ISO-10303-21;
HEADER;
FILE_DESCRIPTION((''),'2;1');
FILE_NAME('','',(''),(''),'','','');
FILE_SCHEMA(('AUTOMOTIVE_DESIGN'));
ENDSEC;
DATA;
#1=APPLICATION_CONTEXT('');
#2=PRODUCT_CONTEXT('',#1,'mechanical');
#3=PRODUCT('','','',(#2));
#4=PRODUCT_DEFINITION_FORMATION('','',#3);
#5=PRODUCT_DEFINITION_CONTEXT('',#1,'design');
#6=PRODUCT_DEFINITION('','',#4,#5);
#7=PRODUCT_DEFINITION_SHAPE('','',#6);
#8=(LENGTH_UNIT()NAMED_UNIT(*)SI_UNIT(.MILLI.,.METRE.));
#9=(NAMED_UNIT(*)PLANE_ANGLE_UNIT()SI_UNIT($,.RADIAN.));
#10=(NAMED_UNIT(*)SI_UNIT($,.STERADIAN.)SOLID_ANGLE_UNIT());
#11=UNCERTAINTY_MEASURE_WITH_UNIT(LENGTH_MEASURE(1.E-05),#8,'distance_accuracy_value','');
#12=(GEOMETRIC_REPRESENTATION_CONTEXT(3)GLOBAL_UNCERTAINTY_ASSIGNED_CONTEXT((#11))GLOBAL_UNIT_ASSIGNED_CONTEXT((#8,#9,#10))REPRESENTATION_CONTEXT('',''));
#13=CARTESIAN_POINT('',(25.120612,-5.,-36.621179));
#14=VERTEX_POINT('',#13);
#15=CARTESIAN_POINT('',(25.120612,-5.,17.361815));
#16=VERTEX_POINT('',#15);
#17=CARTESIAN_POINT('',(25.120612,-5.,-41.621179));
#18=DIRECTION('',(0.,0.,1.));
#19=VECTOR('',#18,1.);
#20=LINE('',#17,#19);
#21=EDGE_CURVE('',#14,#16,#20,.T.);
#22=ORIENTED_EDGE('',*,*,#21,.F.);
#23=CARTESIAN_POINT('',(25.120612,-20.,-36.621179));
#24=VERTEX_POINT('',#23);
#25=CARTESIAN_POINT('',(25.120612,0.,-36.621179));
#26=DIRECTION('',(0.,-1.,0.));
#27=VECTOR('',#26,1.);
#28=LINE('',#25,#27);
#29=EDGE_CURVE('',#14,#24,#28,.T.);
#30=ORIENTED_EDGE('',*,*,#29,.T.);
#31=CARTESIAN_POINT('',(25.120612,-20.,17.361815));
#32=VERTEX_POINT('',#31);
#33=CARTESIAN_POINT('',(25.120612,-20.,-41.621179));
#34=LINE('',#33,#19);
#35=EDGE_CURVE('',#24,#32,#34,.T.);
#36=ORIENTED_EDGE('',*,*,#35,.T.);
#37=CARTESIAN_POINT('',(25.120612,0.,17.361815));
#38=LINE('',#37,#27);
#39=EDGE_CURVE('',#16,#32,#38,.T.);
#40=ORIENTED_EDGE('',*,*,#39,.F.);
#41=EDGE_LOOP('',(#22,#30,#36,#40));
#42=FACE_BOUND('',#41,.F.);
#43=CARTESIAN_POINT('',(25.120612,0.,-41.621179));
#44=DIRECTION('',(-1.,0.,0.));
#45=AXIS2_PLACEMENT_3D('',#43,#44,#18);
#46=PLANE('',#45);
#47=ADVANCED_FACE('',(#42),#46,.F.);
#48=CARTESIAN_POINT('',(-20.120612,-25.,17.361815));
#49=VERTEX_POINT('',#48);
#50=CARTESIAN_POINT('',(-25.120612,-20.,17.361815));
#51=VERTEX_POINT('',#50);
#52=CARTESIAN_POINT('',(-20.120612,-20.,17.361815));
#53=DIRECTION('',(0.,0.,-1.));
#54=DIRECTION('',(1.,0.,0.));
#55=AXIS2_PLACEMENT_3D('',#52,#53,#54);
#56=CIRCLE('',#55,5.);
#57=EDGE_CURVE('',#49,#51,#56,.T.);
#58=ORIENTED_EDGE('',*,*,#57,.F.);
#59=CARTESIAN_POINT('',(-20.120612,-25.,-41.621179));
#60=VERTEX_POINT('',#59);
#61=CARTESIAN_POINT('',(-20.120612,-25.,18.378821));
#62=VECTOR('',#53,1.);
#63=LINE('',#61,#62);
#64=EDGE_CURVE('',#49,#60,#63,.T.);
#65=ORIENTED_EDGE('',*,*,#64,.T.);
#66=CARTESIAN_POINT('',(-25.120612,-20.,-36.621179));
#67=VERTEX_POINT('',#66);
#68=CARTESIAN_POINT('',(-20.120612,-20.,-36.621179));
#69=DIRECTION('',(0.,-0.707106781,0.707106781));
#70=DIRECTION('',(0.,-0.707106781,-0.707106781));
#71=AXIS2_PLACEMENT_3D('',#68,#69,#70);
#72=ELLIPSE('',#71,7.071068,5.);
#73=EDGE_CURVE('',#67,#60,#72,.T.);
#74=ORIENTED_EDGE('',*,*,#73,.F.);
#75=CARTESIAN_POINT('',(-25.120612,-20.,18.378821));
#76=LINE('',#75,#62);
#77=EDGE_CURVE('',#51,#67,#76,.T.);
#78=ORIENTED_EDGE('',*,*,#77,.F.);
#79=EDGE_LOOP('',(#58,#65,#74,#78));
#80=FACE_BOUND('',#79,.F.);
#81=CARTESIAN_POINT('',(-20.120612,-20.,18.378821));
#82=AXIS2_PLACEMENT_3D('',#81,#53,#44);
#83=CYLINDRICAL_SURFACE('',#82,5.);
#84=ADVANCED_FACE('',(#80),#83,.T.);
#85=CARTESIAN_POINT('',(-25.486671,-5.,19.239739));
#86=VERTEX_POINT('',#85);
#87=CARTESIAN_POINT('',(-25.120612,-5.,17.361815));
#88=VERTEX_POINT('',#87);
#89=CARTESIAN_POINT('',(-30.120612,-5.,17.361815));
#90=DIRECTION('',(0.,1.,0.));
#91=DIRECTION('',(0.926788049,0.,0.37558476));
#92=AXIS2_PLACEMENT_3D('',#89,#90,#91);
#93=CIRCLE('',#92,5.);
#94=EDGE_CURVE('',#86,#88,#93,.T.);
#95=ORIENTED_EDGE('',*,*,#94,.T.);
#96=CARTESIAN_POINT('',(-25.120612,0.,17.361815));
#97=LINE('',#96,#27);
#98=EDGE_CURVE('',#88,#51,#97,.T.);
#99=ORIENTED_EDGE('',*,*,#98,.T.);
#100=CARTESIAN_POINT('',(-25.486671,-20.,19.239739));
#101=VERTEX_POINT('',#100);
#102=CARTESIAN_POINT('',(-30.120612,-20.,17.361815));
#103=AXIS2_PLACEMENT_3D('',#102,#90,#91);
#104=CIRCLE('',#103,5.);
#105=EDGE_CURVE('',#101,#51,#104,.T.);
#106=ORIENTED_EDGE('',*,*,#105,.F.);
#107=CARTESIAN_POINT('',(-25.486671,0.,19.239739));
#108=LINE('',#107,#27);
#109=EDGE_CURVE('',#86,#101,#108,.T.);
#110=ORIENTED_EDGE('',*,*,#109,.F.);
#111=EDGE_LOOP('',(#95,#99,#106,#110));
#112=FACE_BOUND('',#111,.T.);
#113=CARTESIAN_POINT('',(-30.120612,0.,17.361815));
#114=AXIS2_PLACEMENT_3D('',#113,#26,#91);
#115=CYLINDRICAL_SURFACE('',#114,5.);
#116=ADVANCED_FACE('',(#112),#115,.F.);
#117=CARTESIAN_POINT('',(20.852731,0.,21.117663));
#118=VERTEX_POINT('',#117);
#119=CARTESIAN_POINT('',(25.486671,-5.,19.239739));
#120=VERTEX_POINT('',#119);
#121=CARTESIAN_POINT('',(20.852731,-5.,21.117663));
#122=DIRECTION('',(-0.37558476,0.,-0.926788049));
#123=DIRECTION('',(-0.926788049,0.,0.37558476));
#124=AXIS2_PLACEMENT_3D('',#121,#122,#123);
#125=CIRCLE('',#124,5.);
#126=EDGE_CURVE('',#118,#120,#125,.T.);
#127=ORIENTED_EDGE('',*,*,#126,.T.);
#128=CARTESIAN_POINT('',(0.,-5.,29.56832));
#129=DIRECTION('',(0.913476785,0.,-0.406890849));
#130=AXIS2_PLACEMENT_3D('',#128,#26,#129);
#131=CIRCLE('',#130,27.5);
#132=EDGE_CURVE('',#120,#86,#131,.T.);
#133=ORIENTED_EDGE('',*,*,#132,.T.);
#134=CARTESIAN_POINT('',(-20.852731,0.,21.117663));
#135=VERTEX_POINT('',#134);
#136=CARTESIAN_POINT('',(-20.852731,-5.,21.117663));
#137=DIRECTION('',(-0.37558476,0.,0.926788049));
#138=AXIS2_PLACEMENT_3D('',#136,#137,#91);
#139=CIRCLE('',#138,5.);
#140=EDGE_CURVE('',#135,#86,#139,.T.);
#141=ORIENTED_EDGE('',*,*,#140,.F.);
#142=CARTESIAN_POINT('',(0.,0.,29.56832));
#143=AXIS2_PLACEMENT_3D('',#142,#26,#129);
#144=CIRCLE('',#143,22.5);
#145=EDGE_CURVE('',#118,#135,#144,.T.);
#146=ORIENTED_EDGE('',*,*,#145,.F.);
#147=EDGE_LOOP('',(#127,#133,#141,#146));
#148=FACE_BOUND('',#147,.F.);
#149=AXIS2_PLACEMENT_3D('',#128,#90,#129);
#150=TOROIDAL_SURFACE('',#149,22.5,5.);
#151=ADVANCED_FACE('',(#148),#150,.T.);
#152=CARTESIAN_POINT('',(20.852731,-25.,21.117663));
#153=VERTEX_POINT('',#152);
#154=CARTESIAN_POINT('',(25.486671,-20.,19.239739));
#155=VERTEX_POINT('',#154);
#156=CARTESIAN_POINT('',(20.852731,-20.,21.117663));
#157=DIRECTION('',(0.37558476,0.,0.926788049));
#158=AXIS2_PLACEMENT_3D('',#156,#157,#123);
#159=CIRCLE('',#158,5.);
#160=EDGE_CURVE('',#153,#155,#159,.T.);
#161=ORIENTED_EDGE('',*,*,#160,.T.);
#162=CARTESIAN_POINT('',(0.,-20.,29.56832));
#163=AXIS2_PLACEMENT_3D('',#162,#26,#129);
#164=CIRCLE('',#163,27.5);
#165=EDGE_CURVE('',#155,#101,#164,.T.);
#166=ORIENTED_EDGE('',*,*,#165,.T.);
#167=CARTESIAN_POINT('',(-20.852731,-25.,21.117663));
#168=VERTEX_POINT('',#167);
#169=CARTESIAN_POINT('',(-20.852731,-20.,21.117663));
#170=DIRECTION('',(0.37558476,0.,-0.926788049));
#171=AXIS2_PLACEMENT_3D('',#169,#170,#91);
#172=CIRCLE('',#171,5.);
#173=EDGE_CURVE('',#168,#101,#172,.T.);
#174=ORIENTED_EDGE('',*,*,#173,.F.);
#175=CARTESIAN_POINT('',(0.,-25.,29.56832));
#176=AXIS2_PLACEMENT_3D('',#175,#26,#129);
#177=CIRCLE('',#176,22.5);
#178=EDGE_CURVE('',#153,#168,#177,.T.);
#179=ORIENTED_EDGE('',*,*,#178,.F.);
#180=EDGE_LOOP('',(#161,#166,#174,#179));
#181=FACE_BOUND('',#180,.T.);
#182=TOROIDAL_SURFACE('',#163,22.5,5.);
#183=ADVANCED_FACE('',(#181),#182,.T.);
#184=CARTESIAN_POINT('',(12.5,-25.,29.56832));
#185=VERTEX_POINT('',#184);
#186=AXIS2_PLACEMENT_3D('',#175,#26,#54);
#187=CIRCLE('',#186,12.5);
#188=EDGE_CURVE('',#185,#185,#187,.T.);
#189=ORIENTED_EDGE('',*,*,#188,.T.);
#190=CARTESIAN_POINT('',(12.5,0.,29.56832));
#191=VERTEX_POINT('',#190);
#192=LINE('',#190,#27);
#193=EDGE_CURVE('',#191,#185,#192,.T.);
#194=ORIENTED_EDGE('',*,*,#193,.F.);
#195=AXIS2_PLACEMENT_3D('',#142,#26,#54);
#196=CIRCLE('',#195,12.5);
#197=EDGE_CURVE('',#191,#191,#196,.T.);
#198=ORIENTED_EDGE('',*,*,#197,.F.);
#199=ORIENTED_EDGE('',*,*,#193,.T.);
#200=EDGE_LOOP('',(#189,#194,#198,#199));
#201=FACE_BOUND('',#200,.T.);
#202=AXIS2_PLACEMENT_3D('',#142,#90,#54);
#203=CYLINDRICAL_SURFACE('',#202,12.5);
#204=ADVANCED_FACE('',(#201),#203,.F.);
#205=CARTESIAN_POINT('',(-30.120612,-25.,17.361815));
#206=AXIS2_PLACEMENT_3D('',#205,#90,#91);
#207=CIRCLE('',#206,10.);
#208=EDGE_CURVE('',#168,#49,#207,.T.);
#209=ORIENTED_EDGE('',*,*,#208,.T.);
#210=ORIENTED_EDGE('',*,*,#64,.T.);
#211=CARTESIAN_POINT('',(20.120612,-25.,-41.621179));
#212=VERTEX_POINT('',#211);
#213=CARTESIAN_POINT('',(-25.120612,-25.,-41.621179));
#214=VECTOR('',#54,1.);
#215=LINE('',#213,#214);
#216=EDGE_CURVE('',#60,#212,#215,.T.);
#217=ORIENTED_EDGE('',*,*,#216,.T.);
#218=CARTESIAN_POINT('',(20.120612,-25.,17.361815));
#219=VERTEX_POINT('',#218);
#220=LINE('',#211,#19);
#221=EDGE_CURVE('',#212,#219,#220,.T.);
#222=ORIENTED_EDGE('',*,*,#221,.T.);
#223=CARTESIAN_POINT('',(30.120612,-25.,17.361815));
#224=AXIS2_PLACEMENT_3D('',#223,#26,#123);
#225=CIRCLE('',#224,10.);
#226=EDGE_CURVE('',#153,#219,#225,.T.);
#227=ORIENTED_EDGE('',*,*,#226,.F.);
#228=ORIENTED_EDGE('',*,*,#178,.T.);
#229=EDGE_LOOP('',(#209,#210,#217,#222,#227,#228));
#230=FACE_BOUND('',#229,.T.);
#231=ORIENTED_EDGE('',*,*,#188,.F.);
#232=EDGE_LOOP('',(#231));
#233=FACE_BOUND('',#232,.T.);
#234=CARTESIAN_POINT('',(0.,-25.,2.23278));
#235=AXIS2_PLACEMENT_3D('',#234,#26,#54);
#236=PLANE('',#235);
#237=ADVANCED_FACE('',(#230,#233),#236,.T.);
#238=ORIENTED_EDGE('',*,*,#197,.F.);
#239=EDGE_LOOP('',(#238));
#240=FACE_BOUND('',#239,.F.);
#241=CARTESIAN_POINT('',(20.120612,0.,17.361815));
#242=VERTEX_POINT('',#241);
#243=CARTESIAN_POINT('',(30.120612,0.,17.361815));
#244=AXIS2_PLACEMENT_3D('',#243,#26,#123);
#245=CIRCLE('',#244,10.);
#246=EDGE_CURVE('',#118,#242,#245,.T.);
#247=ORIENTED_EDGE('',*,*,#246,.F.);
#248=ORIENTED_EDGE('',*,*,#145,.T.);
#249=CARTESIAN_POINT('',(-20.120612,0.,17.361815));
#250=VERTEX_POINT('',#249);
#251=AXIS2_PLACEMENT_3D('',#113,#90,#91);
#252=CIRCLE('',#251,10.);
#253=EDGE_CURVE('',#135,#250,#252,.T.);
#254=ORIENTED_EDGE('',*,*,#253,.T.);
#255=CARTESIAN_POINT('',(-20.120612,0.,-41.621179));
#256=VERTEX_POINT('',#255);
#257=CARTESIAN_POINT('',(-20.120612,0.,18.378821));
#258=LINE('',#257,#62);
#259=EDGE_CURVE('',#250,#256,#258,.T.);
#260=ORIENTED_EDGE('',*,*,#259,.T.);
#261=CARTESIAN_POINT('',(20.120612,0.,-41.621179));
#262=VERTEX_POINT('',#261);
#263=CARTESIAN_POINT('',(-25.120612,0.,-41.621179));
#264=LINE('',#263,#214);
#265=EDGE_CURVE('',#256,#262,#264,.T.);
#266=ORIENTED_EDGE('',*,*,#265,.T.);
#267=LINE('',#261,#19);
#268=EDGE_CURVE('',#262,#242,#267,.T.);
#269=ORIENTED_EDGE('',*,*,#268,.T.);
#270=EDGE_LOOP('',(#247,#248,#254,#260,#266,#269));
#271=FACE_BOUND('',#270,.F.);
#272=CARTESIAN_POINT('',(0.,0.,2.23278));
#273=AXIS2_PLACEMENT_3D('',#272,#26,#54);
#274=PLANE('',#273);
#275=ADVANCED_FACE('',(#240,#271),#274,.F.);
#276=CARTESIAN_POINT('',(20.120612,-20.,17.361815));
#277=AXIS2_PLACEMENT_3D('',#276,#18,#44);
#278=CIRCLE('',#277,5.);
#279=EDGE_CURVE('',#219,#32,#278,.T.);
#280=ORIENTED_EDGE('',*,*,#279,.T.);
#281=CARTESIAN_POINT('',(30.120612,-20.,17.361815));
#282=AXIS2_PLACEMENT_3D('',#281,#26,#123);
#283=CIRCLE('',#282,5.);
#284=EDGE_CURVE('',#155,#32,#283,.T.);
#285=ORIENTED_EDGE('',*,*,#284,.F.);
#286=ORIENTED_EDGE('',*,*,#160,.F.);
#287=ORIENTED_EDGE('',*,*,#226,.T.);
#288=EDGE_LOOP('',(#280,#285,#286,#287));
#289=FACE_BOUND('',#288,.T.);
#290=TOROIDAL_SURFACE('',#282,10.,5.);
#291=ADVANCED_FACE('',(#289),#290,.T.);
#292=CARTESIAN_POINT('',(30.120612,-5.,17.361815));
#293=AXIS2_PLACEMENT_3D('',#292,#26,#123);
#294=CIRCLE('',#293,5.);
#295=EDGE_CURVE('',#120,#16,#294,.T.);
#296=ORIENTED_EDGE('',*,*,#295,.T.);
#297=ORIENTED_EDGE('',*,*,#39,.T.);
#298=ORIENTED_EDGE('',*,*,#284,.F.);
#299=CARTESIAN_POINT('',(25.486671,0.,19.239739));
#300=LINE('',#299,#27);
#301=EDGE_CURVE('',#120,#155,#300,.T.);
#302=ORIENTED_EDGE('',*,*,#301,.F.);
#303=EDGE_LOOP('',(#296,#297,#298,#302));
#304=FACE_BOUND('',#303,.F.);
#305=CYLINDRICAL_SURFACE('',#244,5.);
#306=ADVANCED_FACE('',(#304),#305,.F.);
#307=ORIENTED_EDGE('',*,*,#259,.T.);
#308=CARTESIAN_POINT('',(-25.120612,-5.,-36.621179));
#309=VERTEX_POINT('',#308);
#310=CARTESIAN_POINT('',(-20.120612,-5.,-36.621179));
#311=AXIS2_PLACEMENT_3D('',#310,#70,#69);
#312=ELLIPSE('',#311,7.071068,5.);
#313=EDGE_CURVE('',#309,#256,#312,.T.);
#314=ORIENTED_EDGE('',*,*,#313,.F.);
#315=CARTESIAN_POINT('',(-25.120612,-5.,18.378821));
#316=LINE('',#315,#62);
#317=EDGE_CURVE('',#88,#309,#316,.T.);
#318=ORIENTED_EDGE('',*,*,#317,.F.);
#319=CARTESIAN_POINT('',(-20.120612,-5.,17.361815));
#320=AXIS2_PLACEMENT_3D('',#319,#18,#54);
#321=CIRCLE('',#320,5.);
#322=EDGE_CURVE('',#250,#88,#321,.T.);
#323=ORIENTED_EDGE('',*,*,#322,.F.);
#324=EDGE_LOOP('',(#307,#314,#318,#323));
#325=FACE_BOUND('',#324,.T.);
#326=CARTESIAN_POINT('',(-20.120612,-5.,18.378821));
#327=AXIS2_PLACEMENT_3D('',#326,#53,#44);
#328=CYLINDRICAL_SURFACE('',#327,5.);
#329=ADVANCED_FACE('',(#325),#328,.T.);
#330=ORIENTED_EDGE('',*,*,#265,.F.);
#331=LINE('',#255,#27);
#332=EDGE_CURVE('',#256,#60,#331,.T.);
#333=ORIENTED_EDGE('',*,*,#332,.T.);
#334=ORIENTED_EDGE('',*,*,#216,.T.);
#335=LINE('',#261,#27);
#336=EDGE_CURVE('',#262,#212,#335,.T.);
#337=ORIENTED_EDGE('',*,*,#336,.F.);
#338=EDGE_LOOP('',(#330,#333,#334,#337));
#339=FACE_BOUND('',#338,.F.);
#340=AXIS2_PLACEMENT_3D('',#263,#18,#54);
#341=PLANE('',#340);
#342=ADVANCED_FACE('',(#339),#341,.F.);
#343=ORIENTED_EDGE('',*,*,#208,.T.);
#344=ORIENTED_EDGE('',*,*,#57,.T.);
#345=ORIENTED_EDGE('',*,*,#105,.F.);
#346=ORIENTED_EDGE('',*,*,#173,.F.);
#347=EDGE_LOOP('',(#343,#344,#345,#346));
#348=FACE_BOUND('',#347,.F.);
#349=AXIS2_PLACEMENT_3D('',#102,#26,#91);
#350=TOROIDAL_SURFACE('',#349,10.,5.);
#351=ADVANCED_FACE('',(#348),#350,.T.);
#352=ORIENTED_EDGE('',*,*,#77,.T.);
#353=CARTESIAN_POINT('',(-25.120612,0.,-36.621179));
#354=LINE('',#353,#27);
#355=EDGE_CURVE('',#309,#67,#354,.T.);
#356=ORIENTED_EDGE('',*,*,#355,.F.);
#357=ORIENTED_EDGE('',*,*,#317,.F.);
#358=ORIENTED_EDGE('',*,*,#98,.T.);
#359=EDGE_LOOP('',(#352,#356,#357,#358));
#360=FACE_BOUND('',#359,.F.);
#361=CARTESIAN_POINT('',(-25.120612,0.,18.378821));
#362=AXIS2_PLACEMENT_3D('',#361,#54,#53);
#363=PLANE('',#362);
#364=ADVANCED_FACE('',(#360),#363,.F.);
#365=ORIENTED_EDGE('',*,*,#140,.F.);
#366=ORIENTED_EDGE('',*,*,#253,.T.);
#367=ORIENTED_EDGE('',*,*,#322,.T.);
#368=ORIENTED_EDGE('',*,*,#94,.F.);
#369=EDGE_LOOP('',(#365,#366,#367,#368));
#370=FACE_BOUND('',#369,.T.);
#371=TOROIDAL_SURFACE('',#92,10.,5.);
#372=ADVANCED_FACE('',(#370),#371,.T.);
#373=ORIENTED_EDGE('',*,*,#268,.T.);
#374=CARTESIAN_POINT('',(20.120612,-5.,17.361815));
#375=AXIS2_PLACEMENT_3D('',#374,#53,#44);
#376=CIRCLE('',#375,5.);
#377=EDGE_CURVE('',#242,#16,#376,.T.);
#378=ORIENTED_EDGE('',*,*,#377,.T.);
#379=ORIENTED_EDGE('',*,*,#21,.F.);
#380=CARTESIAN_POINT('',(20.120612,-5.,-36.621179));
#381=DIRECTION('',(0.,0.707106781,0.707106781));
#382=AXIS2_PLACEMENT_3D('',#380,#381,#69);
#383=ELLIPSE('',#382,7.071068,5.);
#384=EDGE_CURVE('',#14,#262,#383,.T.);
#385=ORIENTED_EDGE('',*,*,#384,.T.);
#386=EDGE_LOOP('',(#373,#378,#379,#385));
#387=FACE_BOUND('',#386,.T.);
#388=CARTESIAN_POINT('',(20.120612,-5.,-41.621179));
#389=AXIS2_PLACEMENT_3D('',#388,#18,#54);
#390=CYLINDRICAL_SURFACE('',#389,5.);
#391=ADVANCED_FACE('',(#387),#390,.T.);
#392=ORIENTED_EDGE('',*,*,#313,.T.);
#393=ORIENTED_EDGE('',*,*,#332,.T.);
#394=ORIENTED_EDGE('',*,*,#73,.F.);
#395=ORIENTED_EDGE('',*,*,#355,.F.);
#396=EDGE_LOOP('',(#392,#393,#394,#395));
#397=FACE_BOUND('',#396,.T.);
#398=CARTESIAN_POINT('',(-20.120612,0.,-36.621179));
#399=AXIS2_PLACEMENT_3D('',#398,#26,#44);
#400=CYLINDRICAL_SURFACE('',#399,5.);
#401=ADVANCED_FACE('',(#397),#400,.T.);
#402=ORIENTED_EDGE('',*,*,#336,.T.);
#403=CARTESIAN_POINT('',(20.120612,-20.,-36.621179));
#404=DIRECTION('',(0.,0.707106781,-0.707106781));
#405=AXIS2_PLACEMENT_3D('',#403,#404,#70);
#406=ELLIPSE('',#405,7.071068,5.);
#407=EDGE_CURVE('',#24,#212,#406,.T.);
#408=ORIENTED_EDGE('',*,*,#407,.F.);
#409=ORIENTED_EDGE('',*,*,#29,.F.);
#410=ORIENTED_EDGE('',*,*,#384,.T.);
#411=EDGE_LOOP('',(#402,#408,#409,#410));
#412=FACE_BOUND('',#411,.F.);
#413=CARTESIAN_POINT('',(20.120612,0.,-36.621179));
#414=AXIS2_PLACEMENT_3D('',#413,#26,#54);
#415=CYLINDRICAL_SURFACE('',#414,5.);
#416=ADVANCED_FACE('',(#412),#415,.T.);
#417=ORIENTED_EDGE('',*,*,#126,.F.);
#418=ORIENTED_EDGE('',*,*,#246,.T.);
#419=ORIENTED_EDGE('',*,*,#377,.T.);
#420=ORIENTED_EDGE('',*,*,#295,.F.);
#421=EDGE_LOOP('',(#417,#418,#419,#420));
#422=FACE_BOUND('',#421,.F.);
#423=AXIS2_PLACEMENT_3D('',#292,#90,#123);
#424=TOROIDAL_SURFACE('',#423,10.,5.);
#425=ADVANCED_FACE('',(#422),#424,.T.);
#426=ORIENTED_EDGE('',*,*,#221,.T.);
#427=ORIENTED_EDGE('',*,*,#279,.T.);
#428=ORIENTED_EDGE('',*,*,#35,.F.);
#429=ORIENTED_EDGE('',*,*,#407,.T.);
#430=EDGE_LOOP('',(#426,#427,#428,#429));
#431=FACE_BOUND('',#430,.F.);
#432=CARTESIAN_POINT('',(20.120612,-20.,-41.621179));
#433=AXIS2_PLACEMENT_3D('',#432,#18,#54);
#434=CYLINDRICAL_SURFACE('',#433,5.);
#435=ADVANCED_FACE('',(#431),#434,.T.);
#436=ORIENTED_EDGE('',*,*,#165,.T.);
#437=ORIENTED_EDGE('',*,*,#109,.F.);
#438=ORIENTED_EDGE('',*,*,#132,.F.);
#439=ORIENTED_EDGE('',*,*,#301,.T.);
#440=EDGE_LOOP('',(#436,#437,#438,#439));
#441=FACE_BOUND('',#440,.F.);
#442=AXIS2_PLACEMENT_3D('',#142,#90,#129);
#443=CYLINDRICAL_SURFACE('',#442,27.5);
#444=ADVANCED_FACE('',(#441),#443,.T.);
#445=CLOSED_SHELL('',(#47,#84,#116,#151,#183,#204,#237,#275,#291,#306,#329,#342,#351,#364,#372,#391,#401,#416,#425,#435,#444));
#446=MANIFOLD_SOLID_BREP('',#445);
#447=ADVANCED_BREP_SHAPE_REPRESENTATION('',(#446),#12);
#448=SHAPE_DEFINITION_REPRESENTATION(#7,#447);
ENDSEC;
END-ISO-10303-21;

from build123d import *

# Parameters (mm, degrees)
F0_R     = 12.5
F1_DEPTH = 25
F2_R     = 5


with BuildPart() as f1:
    # F0 (on Front) → F1 (new body)
    with BuildSketch(Plane.XZ):
        with BuildLine():
            ThreePointArc((25.1206115917, 18.3788214192), (0, 57.0683197663), (-25.1206115917, 18.3788214192))
            Line((-25.1206115917, 18.3788214192), (-25.1206115917, -41.6211785808))
            Line((-25.1206115917, -41.6211785808), (25.1206115917, -41.6211785808))
            Line((25.1206115917, -41.6211785808), (25.1206115917, 18.3788214192))
        make_face()
        with Locations((0, 29.5683197663)):
            Circle(F0_R, mode=Mode.SUBTRACT)
    extrude(amount=F1_DEPTH)

    # F2
    f2_edges = [f1.edges().sort_by_distance(p)[0] for p in [
        (-25.120612, -12.5, -41.621179),
        (25.120612, -12.5, -41.621179),
        (-25.120612, -12.5, 18.378821),
        (25.120612, -12.5, 18.378821),
        (0, 0, 57.06832),
        (0, -25, 57.06832),
        (25.120612, 0, -11.621179),
        (25.120612, -25, -11.621179),
        (-25.120612, 0, -11.621179),
        (-25.120612, -25, -11.621179),
    ]]
    fillet(f2_edges, radius=F2_R)


solid = f1.part
